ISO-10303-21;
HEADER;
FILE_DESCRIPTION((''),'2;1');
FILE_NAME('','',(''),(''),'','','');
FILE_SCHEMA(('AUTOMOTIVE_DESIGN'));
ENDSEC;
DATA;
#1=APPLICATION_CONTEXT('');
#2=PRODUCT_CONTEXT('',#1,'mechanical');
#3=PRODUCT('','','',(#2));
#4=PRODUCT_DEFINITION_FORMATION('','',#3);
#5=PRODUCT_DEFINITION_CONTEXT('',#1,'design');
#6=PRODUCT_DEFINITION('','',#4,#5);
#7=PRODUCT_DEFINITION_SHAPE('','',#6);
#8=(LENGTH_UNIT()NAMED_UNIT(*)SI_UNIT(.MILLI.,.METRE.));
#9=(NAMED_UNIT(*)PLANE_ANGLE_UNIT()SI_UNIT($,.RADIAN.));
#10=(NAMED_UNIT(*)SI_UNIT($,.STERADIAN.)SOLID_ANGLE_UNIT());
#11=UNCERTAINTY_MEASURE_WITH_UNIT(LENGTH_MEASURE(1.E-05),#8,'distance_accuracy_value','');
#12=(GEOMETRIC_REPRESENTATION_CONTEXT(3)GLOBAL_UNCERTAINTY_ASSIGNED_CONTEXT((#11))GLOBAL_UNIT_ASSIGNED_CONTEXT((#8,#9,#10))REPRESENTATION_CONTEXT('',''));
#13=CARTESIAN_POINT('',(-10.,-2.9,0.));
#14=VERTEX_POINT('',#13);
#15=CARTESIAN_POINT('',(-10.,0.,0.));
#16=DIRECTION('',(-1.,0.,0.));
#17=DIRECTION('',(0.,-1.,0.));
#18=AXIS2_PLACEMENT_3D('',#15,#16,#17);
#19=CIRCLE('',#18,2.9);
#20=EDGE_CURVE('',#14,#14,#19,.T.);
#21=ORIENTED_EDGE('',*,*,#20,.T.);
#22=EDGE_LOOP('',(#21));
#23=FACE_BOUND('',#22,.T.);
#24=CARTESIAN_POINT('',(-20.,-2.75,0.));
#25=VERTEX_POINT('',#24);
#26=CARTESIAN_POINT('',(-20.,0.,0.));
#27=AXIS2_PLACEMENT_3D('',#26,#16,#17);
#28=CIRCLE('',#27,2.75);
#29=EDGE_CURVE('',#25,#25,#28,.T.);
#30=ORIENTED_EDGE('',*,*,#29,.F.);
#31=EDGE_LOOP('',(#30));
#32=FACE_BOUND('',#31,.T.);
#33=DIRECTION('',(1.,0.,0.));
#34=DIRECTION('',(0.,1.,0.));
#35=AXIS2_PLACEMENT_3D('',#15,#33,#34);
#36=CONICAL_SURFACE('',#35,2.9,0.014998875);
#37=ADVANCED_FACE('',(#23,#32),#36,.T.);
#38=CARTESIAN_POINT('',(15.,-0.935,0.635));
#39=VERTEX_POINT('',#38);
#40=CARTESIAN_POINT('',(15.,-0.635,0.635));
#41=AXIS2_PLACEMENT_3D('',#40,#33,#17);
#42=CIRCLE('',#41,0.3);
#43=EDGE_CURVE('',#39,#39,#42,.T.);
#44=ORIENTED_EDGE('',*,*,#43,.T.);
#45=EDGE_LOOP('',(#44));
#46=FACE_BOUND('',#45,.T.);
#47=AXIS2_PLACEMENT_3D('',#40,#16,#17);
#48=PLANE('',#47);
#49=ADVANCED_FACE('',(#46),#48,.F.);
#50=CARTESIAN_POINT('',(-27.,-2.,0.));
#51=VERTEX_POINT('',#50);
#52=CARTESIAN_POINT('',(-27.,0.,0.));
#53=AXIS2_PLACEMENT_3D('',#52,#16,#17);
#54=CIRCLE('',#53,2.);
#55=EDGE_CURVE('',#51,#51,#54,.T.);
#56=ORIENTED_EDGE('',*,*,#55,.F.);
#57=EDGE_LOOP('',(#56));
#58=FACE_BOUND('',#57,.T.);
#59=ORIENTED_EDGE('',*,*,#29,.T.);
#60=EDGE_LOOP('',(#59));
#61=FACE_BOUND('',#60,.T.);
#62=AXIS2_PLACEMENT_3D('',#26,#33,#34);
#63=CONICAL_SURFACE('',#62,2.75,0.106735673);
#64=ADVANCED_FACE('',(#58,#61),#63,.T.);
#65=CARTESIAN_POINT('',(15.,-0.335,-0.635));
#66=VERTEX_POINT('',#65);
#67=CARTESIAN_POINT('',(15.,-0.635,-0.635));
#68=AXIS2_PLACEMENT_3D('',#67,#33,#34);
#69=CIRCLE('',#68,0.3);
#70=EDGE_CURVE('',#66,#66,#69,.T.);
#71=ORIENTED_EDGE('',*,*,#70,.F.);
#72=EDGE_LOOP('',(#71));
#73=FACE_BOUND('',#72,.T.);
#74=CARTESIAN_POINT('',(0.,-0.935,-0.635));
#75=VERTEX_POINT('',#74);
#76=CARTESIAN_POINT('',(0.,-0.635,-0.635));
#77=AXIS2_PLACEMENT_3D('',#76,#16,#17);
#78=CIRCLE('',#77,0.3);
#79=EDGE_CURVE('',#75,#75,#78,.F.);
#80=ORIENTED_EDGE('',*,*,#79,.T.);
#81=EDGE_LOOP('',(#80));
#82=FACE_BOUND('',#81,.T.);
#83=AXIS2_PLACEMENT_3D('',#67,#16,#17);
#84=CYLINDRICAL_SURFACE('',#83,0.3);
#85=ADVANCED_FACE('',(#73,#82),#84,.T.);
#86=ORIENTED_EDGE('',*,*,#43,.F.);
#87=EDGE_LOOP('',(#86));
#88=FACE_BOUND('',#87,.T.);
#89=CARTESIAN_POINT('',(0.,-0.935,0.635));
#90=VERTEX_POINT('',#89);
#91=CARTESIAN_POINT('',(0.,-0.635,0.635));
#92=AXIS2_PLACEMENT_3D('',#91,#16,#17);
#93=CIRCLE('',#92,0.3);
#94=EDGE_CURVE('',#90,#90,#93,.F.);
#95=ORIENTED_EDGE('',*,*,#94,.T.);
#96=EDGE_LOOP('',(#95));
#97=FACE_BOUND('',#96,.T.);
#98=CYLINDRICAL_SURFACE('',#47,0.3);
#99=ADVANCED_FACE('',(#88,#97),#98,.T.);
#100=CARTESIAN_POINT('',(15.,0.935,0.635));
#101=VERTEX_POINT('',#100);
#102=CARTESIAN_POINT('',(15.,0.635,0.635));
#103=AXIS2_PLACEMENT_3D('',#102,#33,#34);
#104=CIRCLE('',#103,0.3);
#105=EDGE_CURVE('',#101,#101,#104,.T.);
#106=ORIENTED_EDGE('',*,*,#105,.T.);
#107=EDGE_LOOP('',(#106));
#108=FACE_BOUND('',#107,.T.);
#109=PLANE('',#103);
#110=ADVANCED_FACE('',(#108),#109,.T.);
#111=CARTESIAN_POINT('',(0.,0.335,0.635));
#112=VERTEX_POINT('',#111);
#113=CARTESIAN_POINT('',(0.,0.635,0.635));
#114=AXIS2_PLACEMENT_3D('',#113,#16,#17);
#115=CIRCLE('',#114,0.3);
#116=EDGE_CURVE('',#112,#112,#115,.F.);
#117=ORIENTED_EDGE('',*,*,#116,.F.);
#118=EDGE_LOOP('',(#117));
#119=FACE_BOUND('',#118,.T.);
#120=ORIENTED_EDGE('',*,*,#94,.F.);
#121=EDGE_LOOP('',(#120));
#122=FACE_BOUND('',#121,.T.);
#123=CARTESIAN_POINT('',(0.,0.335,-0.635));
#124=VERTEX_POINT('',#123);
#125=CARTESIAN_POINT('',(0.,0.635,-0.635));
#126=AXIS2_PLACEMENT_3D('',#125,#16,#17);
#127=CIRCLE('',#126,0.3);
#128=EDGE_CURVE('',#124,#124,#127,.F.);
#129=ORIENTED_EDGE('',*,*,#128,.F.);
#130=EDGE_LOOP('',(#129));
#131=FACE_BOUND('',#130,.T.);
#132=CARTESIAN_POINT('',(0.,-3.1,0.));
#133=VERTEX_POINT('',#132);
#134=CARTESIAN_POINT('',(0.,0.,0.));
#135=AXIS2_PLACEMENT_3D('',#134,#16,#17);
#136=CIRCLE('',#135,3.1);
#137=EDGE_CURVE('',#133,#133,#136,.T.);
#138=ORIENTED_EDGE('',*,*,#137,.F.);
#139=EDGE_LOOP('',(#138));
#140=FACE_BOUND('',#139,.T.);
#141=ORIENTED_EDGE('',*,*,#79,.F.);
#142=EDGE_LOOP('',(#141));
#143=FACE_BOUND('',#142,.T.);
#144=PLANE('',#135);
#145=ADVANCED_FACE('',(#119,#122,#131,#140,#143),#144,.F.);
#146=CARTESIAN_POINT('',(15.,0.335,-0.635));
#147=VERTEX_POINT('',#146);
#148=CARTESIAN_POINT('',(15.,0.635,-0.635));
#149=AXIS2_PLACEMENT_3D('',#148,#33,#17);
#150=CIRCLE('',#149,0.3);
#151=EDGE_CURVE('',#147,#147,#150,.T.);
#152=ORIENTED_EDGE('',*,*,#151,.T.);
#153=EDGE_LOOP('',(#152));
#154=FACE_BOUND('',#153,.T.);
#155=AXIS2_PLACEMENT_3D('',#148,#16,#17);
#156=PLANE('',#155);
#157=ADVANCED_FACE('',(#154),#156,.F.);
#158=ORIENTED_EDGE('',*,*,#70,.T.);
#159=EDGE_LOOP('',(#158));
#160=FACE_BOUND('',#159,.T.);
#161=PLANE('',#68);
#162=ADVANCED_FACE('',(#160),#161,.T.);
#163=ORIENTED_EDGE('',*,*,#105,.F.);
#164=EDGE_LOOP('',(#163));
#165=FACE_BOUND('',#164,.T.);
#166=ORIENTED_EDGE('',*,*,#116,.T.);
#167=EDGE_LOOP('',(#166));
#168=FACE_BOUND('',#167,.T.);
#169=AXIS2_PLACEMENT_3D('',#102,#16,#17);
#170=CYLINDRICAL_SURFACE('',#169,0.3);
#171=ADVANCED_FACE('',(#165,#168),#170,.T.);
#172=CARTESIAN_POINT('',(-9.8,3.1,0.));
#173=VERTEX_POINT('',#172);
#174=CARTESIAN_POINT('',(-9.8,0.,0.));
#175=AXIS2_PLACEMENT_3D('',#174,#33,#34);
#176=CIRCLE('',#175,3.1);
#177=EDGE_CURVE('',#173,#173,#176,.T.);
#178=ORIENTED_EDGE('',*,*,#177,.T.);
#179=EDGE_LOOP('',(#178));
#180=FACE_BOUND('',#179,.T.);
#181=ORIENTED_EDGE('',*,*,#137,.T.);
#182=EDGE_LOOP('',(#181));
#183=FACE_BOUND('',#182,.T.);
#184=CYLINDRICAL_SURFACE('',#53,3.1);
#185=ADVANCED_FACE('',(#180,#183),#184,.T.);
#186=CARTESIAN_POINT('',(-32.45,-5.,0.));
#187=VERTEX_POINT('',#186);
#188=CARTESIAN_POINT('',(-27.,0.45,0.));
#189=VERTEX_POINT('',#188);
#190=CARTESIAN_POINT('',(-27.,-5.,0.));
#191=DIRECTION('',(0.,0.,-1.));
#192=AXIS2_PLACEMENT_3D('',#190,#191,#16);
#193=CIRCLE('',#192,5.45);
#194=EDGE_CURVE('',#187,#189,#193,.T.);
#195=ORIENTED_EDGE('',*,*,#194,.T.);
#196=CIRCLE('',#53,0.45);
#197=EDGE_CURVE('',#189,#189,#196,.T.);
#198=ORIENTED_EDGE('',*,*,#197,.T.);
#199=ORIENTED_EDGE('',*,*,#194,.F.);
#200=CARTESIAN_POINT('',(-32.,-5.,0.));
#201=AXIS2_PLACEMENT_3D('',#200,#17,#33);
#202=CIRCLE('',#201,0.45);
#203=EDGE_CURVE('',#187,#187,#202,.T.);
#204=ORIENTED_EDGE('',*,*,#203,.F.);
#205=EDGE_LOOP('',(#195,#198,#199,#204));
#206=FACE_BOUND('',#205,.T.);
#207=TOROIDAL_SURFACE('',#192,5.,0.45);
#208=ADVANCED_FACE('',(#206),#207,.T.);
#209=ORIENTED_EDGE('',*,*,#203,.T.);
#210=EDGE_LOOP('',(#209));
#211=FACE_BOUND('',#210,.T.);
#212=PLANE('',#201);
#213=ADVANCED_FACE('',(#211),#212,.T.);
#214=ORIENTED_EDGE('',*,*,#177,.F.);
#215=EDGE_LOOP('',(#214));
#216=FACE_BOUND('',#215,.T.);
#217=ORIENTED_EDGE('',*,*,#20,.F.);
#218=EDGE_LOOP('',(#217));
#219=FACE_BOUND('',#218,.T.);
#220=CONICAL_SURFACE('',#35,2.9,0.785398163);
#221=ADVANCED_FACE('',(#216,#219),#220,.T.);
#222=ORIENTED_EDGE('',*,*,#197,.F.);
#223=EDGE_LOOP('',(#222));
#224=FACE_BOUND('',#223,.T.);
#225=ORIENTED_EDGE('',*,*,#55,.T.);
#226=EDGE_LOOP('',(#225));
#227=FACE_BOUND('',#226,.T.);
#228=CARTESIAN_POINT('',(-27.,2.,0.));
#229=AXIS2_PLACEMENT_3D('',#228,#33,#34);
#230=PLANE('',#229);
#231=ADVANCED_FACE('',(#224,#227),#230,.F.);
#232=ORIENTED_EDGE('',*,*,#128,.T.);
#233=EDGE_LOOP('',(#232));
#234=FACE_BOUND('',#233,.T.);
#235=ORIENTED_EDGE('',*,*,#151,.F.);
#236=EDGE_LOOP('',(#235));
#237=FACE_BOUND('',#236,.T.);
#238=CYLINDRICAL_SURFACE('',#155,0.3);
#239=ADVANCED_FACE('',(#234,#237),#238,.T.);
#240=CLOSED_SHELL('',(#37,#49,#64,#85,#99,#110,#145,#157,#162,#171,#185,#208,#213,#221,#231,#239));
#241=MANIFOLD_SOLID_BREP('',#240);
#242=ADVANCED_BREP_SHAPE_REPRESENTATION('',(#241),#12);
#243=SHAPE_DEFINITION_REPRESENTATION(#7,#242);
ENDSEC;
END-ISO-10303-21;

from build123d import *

# Parameters (mm, degrees)
CHAMFER_1_SIZE  = 0.2
SKETCH_4_R      = 0.45
SKETCH_5_R      = 0.3
EXTRUDE_2_DEPTH = 15


# Read off the part's stored shape, not the designer's step: 旋转2
with BuildPart() as part:
    # 旋转2 outline → 旋转2 (revolve)
    with BuildSketch(Plane.YX):
        Polygon((3.1, 0), (0, 0), (0, -27), (2, -27), (2.75, -20), (2.9, -10), (3.1, -10), align=None)
    revolve(axis=Axis((0, 0, 0), (1, 0, 0)))

    # 倒角1
    chamfer_1_edges = [part.edges().sort_by_distance(p)[0] for p in [
        (-10, -3.1, 0),
    ]]
    chamfer(chamfer_1_edges, length=CHAMFER_1_SIZE - 0.0001)  # a hair under: the kernel refuses the full size

    # 扫描1: sweep along a path in 草图3
    with BuildLine(Plane.XY) as sweep_1_path:
        ThreePointArc((-27, 0), (-30.535533906, -1.464466094), (-32, -5))
    # 草图4 → 扫描1 (sweep)
    with BuildSketch(Plane.ZY.offset(27)):
        Circle(SKETCH_4_R)
    sweep(path=sweep_1_path.line)

    # 草图5 → 拉伸2 (add)
    with BuildSketch(Plane(origin=(0, 0, 0), x_dir=(0, 0, -1), z_dir=(1, 0, 0))):
        with Locations(Location((-0.635, 0.635, 0), (0, 0, 270))):
            Circle(SKETCH_5_R)
        with Locations(Location((-0.635, -0.635, 0), (0, 0, 270))):
            Circle(SKETCH_5_R)
        with Locations(Location((0.635, 0.635, 0), (0, 0, 270))):
            Circle(SKETCH_5_R)
        with Locations(Location((0.635, -0.635, 0), (0, 0, 270))):
            Circle(SKETCH_5_R)
    extrude(amount=EXTRUDE_2_DEPTH)


solid = part.part
